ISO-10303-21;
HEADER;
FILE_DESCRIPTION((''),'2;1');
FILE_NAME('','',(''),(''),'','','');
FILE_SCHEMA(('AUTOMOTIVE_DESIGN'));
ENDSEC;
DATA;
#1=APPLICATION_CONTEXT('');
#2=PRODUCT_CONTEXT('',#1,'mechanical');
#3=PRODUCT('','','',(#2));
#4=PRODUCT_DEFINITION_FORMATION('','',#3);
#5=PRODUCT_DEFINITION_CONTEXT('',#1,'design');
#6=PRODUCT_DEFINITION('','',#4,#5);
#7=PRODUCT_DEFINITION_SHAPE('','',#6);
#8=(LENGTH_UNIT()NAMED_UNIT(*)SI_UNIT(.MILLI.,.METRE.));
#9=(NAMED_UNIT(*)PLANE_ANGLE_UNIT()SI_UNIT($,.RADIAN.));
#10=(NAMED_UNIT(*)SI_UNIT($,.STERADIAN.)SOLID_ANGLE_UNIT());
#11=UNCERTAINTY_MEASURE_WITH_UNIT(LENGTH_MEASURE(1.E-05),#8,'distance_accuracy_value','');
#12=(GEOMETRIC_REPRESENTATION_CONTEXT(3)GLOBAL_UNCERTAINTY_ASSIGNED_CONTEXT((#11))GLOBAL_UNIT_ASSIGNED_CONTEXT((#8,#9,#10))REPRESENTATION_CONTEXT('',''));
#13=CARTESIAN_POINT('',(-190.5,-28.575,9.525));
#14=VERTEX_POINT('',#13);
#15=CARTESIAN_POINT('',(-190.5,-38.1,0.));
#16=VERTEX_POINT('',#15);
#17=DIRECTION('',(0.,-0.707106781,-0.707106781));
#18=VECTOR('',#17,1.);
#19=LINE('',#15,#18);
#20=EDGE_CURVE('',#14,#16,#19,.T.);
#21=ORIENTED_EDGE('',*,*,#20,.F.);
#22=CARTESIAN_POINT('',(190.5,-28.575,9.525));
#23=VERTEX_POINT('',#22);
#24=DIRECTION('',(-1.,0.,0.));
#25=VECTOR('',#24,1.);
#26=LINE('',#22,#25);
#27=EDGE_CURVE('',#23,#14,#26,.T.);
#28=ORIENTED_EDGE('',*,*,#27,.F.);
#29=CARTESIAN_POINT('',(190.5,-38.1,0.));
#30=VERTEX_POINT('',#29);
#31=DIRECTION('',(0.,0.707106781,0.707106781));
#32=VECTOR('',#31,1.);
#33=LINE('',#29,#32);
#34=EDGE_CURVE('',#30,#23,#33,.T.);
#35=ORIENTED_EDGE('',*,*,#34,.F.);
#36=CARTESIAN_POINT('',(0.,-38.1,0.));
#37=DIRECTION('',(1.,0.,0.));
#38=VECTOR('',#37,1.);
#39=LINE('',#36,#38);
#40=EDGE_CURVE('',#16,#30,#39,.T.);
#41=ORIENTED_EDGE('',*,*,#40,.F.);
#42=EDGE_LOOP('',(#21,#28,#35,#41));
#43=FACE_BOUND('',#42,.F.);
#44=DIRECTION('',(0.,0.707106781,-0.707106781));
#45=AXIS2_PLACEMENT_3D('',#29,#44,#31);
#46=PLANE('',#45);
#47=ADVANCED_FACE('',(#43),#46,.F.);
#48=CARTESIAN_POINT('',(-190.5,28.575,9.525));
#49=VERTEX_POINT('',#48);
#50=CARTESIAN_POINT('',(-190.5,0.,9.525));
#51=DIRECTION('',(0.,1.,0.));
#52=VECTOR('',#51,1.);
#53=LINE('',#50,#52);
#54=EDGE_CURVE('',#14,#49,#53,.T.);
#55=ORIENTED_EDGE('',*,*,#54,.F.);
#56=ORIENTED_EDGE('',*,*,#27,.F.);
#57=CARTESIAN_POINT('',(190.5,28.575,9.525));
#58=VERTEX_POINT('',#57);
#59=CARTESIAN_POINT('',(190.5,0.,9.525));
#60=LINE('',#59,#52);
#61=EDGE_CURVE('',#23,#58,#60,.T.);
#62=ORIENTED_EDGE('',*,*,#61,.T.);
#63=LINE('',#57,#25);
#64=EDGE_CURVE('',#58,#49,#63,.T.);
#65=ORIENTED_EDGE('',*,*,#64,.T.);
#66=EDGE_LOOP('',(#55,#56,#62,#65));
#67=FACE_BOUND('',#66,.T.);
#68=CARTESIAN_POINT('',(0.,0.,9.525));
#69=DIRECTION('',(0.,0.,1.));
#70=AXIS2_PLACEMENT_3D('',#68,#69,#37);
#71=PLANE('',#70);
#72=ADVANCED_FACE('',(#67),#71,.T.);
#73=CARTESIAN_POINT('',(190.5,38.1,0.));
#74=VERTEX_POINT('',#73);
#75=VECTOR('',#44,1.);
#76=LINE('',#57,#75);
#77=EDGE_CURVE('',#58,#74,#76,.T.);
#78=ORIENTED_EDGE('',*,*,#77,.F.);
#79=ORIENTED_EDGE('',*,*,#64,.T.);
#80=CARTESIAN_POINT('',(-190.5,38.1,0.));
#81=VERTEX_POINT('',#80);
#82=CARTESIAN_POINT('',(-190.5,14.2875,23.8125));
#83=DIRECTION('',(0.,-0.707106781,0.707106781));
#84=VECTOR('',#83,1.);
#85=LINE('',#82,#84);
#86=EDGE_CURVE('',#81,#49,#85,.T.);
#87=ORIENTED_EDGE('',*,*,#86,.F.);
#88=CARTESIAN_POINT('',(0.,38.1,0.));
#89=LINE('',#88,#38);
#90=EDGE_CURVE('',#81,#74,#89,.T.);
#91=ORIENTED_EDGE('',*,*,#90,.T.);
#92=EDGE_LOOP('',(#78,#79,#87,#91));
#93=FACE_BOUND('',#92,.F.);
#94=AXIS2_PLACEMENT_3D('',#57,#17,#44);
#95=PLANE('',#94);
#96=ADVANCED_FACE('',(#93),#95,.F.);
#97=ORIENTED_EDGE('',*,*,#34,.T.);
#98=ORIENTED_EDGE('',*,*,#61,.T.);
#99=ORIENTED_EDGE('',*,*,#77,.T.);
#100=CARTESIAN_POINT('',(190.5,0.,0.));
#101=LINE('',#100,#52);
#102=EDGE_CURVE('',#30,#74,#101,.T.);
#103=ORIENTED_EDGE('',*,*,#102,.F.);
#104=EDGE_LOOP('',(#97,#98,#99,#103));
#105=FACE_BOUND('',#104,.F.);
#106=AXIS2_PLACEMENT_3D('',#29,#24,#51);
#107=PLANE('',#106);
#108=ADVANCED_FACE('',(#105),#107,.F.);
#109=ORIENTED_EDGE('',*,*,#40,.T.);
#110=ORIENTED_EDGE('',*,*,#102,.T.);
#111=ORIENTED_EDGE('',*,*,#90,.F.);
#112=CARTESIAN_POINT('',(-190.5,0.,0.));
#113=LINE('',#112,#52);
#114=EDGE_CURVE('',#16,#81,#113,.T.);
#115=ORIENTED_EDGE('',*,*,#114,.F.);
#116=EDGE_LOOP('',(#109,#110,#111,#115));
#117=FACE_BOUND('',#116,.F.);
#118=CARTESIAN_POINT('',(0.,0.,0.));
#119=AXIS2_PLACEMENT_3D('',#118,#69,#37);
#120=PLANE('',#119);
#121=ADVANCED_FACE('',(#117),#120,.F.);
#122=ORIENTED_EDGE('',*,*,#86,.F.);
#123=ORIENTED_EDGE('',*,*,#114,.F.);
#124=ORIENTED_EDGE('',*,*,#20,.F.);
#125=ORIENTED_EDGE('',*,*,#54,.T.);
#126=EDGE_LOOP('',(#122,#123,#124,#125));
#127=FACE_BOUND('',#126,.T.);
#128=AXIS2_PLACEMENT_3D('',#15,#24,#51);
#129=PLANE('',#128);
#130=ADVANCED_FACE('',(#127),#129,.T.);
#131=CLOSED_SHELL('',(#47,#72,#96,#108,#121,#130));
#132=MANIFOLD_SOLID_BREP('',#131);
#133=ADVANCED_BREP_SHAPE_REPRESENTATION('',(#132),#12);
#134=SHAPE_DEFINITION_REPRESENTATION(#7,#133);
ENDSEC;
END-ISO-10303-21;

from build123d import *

# Parameters (mm, degrees)
F0_W     = 381
F0_H     = 76.2
F1_DEPTH = 9.525
F3_DEPTH = 381.001


# Not quite as in the source:
# - a length typed as a fraction of an inch, garbled in the dataset ("3 / 203.2 mm" for 3/8 in), is restored


with BuildPart() as f1:
    # F0 (on Top) → F1 (new body)
    with BuildSketch(Plane.XY):
        Rectangle(F0_W, F0_H)
    extrude(amount=F1_DEPTH)

    # F2 (on face) → F3 (cut, through all)
    with BuildSketch(Plane.YZ.offset(190.5)):
        Polygon((-42.2204956412, -2.0329502877), (-38.1, 0), (-28.575, 9.525), (-39.3758900464, 14.3782440573), align=None)
        Polygon((42.2204956412, -2.0329502877), (39.3758900464, 14.3782440573), (28.575, 9.525), (38.1, 0), align=None)
    extrude(amount=-F3_DEPTH, mode=Mode.SUBTRACT)


solid = f1.part
